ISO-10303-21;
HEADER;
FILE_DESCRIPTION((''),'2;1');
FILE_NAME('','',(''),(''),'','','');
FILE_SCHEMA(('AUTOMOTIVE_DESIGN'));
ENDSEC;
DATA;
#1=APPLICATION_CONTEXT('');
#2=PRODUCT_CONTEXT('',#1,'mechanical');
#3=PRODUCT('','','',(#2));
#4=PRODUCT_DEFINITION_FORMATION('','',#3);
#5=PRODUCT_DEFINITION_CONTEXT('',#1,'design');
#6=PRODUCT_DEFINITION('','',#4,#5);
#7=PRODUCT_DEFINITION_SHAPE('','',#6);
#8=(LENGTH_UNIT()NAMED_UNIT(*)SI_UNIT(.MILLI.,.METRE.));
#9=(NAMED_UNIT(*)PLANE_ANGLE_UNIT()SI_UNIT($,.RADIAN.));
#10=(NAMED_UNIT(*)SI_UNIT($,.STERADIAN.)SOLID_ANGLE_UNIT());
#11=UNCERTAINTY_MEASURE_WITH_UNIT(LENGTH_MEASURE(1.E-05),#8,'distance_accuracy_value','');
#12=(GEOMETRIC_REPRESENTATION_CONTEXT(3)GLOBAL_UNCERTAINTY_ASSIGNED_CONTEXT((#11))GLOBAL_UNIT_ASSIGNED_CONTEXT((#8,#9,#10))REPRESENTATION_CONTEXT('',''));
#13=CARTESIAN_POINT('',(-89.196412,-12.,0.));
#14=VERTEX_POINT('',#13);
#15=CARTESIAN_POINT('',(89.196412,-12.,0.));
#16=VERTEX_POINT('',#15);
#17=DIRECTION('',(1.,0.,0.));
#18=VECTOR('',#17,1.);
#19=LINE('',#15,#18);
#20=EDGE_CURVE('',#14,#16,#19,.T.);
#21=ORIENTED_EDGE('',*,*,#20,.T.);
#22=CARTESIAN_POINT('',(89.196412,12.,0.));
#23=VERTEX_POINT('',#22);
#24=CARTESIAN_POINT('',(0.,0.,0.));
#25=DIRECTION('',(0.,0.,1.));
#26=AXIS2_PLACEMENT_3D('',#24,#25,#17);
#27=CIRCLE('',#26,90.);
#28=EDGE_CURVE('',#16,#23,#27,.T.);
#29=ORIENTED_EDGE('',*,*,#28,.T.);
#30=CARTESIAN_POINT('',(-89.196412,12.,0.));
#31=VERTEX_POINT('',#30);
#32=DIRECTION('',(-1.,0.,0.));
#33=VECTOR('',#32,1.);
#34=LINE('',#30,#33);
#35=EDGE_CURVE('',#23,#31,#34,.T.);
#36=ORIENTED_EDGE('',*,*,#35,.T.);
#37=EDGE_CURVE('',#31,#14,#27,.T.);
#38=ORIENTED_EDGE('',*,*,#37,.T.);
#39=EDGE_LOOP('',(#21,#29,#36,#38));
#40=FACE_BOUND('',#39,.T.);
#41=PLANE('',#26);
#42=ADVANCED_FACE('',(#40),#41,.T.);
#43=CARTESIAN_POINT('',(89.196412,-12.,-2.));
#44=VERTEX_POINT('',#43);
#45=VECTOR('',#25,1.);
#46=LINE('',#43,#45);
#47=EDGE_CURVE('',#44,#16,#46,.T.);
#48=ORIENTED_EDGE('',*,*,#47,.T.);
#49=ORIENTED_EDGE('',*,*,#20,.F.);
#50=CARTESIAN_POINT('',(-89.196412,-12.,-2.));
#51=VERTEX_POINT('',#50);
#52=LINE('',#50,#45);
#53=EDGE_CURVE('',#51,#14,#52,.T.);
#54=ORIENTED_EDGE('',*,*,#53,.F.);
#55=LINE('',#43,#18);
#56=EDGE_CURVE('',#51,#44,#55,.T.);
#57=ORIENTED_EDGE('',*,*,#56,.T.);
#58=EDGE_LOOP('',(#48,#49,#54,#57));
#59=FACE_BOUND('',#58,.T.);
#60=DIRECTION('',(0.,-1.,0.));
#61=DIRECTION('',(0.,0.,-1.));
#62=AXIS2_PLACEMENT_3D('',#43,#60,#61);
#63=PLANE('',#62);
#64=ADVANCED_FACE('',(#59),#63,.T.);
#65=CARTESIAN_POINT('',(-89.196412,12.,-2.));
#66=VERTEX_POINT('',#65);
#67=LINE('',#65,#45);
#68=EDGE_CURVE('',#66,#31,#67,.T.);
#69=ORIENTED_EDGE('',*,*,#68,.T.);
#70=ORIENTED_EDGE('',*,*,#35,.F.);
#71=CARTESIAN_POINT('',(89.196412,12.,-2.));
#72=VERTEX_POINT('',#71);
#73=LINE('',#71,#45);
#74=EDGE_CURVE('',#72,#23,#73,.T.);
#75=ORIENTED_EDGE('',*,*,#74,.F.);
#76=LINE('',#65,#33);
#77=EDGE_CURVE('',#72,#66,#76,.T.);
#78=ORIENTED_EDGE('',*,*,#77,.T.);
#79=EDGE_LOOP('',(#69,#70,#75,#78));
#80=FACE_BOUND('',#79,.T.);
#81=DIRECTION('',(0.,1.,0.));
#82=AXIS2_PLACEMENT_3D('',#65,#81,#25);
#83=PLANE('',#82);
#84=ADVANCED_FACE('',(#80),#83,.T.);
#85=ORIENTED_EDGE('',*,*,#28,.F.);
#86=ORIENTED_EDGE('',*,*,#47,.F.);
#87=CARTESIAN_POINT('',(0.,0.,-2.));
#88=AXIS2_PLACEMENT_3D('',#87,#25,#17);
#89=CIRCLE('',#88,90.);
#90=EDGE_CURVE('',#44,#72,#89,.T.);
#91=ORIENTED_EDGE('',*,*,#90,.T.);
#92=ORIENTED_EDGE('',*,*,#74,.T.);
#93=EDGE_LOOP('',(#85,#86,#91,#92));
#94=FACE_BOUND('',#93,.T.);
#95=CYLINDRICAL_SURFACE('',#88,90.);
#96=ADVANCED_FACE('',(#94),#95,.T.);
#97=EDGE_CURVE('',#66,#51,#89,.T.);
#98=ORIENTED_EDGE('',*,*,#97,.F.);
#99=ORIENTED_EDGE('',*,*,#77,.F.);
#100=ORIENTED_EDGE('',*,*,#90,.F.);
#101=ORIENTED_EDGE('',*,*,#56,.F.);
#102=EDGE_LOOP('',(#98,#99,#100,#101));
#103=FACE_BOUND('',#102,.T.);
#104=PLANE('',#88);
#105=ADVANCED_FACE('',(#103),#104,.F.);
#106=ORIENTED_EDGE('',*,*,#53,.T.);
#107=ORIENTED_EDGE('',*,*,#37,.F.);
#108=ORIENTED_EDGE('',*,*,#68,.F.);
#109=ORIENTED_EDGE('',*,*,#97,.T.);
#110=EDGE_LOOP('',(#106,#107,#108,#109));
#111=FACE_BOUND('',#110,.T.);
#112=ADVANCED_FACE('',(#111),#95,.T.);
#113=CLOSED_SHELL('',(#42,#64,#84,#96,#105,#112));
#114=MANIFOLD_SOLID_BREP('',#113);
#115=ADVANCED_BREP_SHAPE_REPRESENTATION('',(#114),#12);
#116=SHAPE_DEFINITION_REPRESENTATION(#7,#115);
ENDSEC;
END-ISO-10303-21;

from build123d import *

# Parameters (mm, degrees)
FLANGE_BASE1_DEPTH = 2


# Sheet-metal steps are written as plain solids
with BuildPart() as part:
    # Esboço1 → Flange-base1 (new body)
    with BuildSketch(Plane.XY):
        with BuildLine():
            Line((-89.196412484, 12), (89.196412484, 12))
            ThreePointArc((89.196412484, 12), (90, 0), (89.196412484, -12))
            Line((89.196412484, -12), (-89.196412484, -12))
            ThreePointArc((-89.196412484, -12), (-90, 0), (-89.196412484, 12))
        make_face()
    extrude(amount=-FLANGE_BASE1_DEPTH)


solid = part.part
